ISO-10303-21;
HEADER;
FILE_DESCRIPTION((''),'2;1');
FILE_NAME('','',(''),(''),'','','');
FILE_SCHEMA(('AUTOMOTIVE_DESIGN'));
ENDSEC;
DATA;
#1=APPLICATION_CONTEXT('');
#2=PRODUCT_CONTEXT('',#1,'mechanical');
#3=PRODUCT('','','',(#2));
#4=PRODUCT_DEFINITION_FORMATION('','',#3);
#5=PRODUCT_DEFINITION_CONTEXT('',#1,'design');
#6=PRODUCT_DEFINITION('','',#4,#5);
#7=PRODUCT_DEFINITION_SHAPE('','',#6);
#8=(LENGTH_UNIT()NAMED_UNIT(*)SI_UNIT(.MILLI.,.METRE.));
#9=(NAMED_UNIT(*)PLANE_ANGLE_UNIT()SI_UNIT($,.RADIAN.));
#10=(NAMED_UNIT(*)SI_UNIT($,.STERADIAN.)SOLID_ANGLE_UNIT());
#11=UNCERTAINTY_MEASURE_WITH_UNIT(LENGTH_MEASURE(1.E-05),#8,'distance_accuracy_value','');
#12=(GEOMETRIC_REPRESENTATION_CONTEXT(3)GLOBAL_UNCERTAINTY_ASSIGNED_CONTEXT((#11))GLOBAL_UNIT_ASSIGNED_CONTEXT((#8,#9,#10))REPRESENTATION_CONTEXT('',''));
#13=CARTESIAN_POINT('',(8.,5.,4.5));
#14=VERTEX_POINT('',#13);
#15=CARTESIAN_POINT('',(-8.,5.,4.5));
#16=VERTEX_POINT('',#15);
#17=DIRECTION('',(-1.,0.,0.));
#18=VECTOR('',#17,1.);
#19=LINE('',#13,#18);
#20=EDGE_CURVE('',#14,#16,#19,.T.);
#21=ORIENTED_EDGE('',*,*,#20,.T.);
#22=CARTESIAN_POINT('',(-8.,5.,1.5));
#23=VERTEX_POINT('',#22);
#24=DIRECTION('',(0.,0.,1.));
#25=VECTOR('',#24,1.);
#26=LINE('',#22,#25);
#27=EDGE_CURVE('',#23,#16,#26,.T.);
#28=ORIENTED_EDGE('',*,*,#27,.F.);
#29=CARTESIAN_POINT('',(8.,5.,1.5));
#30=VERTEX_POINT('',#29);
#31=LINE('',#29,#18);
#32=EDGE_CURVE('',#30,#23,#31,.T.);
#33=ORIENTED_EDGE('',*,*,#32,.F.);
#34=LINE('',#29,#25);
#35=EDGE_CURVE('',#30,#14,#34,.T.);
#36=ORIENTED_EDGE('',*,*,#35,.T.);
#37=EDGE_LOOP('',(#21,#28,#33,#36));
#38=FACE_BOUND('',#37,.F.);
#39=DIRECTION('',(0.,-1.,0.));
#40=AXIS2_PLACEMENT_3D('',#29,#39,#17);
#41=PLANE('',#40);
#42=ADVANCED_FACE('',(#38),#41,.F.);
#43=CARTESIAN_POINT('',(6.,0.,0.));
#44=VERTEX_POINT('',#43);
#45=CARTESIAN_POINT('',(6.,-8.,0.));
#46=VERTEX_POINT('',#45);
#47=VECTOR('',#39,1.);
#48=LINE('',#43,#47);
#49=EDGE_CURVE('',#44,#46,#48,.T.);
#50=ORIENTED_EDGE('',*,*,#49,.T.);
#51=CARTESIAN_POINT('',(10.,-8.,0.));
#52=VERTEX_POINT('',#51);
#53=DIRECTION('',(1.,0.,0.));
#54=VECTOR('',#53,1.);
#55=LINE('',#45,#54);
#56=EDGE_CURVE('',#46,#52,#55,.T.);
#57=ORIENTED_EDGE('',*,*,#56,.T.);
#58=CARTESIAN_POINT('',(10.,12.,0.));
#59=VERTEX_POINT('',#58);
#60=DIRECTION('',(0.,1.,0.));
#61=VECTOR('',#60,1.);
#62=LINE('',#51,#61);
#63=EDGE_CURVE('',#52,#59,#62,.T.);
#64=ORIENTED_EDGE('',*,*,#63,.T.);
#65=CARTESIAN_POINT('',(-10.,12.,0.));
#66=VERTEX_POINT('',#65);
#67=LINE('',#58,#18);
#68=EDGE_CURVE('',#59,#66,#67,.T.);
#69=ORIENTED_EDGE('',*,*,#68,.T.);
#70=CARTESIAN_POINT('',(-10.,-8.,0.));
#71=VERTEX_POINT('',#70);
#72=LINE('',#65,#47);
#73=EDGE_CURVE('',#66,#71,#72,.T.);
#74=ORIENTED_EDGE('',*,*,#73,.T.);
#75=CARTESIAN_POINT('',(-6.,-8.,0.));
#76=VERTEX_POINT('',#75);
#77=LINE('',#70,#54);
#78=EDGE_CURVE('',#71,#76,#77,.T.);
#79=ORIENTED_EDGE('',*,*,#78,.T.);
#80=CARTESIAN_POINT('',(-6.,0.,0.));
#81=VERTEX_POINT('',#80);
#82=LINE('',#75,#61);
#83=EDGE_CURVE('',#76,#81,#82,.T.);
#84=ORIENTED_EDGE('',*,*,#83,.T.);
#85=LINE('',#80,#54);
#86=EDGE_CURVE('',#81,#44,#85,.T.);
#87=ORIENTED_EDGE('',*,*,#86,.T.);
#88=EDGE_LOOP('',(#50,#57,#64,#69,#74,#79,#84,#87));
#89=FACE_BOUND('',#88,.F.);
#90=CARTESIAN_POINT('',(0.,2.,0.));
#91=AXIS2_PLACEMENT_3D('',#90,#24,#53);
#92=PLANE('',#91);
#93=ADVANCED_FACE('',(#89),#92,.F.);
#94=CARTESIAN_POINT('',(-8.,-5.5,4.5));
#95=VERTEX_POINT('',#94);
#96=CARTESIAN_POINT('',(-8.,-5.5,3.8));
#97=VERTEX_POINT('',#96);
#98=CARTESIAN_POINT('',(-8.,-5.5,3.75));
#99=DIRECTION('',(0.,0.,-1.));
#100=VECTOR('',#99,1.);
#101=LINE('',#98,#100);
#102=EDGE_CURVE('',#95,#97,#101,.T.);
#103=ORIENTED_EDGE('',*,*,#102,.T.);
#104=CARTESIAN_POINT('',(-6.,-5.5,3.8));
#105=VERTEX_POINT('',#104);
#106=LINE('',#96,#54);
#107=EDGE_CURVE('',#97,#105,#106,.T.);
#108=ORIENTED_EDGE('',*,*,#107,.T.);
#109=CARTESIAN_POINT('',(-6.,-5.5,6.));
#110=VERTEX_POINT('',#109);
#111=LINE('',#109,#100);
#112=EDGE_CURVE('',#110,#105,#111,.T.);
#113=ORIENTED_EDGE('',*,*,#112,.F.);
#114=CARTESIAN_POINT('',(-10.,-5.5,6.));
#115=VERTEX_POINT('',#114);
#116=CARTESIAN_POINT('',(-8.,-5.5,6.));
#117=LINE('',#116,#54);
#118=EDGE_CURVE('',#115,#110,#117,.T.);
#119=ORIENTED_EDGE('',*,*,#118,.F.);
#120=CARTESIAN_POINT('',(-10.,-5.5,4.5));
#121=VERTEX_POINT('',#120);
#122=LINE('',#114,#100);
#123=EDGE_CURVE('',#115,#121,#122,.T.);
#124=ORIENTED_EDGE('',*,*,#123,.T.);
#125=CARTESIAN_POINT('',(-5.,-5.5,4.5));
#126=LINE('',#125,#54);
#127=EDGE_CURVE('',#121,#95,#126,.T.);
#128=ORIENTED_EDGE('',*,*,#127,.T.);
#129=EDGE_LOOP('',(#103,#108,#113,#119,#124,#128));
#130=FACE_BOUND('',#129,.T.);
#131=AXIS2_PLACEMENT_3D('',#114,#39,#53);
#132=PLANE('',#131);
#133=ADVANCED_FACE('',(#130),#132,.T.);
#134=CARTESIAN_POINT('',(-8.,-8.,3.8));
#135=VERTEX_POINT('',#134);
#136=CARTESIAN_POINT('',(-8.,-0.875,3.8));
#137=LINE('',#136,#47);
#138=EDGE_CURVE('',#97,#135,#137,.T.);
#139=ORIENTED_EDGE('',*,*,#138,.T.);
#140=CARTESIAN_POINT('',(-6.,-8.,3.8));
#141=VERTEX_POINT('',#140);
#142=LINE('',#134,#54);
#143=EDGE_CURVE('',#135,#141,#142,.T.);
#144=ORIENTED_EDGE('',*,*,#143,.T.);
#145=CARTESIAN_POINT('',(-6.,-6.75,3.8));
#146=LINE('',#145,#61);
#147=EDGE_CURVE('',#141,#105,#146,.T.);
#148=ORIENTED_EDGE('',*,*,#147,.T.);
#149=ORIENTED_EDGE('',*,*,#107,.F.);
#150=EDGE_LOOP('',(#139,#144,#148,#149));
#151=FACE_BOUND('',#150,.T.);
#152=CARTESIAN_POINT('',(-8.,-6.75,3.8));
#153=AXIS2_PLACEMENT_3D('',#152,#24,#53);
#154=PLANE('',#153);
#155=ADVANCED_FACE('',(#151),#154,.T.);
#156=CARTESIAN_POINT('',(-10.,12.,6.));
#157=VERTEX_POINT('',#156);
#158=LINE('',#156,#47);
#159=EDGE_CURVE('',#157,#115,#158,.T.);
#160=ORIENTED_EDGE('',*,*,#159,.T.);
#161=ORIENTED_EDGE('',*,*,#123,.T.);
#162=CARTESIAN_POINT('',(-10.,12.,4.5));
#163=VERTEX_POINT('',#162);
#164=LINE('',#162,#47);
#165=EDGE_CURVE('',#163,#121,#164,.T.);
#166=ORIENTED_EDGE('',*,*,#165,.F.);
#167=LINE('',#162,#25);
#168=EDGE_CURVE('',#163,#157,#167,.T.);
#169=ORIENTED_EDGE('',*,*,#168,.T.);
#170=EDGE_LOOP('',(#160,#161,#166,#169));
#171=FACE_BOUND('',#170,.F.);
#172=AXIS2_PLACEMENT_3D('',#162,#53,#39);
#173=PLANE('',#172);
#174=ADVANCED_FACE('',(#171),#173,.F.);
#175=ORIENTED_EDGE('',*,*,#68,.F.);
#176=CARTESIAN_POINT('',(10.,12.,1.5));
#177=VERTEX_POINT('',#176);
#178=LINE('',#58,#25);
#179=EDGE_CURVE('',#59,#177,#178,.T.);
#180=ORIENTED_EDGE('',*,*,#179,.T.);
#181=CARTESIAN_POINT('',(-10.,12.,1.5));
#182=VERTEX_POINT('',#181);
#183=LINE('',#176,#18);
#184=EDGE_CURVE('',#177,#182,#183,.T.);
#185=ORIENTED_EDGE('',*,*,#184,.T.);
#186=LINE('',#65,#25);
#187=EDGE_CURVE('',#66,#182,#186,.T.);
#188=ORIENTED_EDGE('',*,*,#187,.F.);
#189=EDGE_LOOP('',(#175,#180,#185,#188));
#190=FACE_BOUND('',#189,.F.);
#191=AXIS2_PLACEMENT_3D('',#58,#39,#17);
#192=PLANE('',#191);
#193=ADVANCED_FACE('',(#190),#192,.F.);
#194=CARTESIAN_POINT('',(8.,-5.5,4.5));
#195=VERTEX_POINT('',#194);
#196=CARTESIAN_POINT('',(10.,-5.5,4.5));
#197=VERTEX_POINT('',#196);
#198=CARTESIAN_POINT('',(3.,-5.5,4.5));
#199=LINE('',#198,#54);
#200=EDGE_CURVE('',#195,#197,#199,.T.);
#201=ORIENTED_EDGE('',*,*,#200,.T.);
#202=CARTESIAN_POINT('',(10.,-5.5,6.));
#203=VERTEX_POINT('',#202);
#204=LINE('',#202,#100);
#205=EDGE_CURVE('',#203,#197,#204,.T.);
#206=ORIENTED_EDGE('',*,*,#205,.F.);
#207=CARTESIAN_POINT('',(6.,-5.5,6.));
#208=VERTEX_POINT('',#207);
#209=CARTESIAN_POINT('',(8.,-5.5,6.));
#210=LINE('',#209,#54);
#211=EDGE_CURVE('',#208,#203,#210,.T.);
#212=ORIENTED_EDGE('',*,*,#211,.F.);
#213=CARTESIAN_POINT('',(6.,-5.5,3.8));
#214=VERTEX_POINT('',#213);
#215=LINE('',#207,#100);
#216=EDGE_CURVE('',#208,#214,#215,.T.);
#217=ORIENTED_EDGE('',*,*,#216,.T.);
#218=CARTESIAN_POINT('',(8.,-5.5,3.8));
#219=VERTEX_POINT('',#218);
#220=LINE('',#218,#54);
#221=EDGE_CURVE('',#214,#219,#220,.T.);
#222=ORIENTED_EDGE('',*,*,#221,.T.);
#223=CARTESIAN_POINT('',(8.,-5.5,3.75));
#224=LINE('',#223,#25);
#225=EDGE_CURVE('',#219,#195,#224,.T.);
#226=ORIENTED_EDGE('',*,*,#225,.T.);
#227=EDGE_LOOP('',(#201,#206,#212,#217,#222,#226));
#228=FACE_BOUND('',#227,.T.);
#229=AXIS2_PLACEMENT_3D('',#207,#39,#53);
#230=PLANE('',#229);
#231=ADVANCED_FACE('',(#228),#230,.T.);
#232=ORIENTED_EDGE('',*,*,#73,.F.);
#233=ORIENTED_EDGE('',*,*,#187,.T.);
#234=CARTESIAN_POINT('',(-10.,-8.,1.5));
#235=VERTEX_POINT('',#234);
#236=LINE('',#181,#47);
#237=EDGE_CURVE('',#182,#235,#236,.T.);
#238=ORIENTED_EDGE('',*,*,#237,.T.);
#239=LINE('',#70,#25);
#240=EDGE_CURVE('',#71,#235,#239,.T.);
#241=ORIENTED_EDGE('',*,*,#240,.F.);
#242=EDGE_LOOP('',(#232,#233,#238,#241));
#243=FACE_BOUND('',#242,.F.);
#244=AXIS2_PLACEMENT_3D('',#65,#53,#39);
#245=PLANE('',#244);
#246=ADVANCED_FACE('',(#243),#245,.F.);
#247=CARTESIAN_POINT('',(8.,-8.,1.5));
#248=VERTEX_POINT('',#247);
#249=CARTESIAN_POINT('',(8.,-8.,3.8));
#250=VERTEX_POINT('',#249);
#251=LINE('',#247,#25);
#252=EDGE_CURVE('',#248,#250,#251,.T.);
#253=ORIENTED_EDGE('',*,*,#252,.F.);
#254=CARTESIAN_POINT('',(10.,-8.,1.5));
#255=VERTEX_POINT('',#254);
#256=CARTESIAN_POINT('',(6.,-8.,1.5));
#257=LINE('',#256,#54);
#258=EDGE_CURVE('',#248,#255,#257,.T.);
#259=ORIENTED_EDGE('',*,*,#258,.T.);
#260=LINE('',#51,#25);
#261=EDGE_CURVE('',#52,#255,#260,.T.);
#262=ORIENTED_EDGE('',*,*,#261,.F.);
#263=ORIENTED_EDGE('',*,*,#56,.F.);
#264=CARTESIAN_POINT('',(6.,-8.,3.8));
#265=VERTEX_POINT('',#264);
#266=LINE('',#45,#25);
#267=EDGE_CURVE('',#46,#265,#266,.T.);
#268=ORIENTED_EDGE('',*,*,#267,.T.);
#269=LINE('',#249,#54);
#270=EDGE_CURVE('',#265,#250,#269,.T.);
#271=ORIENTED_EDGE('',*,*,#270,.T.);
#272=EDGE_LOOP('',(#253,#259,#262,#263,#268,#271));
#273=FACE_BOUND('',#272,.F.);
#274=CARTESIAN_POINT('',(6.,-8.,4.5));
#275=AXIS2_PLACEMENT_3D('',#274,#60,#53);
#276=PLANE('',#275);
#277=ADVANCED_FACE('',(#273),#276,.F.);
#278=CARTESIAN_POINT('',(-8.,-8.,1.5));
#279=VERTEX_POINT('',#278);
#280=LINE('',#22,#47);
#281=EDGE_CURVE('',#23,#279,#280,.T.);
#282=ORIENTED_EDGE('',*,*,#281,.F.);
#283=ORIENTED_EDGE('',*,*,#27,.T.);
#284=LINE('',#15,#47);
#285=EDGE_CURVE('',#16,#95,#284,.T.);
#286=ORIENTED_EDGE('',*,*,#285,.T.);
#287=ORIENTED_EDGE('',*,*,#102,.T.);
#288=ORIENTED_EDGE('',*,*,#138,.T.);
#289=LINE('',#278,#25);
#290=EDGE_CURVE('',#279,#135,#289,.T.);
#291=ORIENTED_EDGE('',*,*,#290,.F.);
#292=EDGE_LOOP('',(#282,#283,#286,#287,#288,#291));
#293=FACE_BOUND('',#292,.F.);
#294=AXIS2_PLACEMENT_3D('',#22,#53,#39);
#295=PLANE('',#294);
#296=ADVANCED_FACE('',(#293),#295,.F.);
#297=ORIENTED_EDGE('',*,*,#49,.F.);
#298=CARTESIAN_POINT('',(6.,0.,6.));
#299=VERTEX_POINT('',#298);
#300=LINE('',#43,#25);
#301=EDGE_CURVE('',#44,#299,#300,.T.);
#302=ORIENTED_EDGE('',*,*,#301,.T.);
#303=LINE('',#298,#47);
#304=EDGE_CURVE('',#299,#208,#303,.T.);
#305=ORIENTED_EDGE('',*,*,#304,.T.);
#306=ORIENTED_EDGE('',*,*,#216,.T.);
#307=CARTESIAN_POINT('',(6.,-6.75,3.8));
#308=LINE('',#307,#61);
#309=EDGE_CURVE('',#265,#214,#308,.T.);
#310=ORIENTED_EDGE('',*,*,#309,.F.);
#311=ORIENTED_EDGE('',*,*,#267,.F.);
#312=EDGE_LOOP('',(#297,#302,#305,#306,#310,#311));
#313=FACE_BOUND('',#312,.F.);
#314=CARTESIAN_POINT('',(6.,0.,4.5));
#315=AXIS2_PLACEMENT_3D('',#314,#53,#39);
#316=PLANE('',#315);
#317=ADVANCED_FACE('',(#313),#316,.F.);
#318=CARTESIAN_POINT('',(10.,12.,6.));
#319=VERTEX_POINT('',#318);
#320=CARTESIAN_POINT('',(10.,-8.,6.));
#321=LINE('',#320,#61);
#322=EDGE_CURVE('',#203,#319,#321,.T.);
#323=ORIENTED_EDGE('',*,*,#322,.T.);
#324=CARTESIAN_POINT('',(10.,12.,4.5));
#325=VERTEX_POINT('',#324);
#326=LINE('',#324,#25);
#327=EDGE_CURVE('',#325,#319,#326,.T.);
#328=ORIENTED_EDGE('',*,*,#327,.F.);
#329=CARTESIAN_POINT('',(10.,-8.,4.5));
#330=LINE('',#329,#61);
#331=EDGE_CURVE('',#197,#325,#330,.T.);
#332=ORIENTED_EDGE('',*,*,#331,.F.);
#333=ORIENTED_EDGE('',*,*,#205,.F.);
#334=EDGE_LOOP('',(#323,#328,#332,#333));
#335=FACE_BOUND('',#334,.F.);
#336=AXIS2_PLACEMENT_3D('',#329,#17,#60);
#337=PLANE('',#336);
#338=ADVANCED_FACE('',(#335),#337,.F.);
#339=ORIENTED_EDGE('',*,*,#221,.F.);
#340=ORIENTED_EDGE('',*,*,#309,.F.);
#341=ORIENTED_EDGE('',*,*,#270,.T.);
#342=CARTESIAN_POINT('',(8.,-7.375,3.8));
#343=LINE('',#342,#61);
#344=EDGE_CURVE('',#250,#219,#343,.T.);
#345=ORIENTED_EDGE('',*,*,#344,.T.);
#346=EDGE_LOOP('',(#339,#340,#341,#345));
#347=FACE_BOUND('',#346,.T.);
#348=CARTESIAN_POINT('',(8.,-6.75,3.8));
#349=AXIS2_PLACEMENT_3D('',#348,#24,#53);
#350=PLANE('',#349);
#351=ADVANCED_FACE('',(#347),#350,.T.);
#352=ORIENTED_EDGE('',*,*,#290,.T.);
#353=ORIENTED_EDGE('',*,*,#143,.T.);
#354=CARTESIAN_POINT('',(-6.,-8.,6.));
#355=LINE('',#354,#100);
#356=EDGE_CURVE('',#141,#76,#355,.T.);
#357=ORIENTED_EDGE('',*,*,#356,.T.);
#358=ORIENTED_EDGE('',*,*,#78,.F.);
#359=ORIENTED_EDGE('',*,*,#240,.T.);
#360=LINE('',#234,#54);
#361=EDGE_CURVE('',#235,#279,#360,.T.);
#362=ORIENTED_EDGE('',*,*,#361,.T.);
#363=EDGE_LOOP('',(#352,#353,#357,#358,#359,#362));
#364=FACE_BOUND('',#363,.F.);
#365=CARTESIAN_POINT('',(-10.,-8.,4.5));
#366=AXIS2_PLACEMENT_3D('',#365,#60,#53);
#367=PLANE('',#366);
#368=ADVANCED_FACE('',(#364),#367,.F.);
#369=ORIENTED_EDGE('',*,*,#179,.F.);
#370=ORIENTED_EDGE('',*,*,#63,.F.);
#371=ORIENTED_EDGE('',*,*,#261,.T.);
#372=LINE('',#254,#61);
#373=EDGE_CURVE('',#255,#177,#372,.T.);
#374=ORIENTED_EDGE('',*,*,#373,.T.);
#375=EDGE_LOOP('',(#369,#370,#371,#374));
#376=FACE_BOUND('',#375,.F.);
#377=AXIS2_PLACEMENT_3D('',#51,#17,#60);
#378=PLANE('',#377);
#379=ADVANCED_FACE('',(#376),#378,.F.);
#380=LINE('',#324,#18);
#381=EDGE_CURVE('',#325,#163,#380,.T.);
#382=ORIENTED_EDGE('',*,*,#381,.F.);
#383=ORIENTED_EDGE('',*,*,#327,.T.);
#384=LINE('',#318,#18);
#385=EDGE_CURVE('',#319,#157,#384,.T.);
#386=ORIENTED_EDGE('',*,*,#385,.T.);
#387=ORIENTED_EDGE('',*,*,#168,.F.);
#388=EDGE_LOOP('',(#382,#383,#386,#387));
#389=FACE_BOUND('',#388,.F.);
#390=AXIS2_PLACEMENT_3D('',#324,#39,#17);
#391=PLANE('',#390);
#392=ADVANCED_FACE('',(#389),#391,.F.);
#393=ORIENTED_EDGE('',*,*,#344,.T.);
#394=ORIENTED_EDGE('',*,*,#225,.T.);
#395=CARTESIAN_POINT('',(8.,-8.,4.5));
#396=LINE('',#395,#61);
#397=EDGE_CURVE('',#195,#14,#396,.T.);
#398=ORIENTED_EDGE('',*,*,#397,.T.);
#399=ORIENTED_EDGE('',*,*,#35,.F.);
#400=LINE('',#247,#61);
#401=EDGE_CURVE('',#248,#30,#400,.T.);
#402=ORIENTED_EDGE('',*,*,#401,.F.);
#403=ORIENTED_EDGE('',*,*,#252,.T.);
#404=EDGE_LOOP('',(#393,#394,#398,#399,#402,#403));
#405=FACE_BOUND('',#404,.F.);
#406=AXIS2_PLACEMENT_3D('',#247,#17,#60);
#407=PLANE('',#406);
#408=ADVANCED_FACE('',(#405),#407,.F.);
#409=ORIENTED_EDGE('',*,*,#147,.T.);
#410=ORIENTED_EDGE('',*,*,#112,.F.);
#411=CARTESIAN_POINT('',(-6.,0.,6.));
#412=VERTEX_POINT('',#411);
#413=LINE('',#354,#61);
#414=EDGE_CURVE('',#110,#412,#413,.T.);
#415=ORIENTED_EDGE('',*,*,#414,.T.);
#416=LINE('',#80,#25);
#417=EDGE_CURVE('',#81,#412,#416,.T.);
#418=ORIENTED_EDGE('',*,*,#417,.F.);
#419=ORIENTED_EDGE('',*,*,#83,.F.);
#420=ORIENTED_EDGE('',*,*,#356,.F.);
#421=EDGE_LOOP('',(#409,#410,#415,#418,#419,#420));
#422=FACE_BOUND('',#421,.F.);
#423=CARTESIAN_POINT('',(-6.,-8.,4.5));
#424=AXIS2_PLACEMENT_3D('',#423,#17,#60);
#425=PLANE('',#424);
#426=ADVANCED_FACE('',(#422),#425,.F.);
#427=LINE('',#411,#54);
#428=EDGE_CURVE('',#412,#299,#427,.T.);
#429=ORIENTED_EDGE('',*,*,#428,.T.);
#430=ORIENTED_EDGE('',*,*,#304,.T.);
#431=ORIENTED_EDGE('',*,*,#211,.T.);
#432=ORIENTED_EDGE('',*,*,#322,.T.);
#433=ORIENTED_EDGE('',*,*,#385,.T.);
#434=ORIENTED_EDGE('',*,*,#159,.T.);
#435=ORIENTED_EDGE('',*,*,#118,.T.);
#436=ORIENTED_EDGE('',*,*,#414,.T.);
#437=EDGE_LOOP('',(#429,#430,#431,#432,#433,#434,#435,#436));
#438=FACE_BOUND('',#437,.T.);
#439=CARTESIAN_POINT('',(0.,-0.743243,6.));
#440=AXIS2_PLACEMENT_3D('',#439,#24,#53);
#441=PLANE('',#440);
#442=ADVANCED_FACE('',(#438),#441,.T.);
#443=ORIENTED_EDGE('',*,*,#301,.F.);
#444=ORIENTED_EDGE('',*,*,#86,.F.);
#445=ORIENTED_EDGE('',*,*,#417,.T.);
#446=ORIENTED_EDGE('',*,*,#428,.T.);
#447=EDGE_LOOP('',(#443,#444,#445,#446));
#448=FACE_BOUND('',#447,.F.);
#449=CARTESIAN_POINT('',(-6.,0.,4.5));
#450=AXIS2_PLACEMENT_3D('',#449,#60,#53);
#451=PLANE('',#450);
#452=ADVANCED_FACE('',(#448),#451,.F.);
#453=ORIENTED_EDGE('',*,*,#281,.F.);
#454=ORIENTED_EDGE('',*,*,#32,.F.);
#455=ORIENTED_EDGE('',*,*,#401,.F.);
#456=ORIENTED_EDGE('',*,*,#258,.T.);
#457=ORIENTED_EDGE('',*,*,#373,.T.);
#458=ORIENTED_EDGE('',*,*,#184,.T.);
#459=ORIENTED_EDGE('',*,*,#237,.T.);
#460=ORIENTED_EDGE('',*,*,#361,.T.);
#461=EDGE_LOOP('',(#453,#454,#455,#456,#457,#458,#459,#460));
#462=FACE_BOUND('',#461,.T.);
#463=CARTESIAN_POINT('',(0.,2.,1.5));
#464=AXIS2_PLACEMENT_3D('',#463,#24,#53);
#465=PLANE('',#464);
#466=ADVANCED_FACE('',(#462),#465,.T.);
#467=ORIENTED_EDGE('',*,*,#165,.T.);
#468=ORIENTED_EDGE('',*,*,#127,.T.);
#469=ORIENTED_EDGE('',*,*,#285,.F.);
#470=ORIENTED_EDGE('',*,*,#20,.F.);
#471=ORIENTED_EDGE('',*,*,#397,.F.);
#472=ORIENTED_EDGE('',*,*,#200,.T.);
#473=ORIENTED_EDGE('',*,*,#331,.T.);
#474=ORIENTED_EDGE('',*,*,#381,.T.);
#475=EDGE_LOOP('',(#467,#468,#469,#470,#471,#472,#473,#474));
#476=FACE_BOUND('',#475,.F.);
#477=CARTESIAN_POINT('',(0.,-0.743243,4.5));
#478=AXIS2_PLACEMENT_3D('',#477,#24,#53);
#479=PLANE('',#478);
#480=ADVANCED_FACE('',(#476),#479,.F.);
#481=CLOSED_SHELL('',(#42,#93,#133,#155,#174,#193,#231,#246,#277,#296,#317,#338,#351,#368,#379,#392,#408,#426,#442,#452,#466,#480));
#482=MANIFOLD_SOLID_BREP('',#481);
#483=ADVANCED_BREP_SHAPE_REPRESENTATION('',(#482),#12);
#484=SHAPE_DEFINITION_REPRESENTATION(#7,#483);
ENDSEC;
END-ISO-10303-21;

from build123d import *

# Parameters (mm, degrees)
F1_DEPTH = 1.5
F3_DEPTH = 3
F5_DEPTH = 1.5
F6_W     = 4
F6_H     = 2.5
F7_DEPTH = 2.2


# Not quite as in the source:
# - a feature names something its author has since deleted; it is built from what else it names


with BuildPart() as f1:
    # F0 (on Top) → F1 (new body)
    with BuildSketch(Plane.XY):
        Polygon((10, 12), (-10, 12), (-10, -8), (-6, -8), (-6, 0), (6, 0), (6, -8), (10, -8), align=None)
    extrude(amount=F1_DEPTH)

    # F2 (on face) → F3 (join)
    with BuildSketch(Plane.XY.offset(1.5)):
        Polygon((-8, 5), (-8, -8), (-6, -8), (-6, 0), (6, 0), (6, -8), (8, -8), (8, 5), align=None)
    extrude(amount=F3_DEPTH)

    # F4 (on face) → F5 (join)
    with BuildSketch(Plane.XY.offset(4.5)):
        Polygon((-8, -8), (-6, -8), (-6, 0), (6, 0), (6, -8), (8, -8), (8, 5), (-8, 5), align=None)
        Polygon((-10, -8), (-8, -8), (-8, 5), (8, 5), (8, -8), (10, -8), (10, 12), (-10, 12), align=None)
    extrude(amount=F5_DEPTH)

    # F6 (on face) → F7 (cut)
    with BuildSketch(Plane.XY.offset(6)):
        with Locations((-8, -6.75)):
            Rectangle(F6_W, F6_H)
        with Locations((8, -6.75)):
            Rectangle(F6_W, F6_H)
    extrude(amount=-F7_DEPTH, mode=Mode.SUBTRACT)


solid = f1.part
